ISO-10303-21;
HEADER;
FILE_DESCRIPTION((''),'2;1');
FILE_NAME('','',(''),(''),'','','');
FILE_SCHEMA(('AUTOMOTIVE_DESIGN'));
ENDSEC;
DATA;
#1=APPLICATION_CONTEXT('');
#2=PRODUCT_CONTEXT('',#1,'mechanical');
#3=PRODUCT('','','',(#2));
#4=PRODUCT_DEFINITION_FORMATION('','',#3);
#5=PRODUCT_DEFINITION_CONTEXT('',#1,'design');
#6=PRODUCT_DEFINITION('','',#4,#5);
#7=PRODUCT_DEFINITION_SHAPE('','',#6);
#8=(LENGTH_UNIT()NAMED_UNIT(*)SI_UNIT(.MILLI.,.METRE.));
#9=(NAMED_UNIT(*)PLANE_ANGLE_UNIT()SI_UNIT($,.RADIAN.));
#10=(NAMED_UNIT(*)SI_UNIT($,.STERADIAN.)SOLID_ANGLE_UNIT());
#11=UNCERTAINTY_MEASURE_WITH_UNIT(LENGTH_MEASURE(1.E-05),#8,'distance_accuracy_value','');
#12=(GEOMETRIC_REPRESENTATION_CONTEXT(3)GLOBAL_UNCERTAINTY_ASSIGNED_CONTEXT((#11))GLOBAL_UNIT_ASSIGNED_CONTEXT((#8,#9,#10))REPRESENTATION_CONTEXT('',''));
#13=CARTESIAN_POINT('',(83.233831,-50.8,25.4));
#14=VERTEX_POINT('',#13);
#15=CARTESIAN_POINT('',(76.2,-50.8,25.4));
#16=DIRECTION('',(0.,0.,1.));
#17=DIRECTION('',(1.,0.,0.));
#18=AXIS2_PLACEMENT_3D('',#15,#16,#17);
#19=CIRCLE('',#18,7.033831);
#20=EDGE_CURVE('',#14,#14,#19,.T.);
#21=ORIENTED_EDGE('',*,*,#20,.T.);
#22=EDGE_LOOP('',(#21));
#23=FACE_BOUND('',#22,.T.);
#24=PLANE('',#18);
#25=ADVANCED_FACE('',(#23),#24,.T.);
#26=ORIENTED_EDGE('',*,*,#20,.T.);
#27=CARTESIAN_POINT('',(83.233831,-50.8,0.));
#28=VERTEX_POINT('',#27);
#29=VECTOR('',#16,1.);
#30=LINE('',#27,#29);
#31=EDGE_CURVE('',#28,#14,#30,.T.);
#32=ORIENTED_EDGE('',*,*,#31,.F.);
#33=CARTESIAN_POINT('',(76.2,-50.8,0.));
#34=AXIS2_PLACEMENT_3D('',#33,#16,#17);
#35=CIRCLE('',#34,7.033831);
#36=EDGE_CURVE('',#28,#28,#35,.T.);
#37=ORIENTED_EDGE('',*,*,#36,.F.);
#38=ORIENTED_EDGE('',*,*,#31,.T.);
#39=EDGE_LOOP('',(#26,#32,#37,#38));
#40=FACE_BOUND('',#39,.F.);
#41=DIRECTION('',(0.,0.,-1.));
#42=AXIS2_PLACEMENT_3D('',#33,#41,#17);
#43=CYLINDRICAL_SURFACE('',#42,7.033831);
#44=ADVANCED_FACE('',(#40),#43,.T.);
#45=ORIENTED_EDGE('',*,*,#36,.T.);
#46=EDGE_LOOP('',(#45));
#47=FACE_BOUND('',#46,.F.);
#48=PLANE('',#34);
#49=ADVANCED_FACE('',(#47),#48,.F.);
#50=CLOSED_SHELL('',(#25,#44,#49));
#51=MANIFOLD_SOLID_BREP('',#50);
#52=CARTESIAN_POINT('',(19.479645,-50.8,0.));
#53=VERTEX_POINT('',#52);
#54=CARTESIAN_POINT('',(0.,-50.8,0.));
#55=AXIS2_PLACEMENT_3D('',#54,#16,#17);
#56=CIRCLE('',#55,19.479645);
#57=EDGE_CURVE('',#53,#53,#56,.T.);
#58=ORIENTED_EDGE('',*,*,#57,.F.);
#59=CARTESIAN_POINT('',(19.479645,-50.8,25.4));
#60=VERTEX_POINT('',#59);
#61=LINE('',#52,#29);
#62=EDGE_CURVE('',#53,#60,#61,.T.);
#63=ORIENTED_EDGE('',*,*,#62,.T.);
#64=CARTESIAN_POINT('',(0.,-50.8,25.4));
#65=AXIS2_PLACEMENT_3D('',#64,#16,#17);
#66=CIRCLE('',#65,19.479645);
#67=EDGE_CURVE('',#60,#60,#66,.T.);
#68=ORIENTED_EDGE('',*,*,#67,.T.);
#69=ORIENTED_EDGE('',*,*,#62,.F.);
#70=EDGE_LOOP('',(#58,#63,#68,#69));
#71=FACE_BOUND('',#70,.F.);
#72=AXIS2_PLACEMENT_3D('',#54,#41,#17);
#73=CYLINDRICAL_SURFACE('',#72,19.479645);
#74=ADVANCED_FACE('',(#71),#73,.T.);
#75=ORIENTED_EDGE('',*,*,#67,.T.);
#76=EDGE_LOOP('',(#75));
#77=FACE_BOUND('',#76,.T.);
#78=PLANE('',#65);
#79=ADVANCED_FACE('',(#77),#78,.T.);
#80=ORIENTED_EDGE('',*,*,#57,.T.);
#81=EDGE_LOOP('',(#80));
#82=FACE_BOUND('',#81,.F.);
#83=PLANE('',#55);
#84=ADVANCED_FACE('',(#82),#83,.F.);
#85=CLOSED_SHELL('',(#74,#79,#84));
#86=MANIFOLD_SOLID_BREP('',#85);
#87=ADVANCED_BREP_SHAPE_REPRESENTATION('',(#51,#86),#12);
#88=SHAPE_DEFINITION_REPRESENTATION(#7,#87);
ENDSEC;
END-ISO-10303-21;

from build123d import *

# Parameters (mm, degrees)
F1_R     = 19.4796450826
F2_DEPTH = 25.4
F1_R_2   = 7.0338305057


# Not quite as in the source:
# - a feature names something its author has since deleted; it is built from what else it names


with BuildPart() as f2:
    # F1 (on Top) → F2 (new body)
    with BuildSketch(Plane.XY):
        with Locations((0, -50.8)):
            Circle(F1_R)
    extrude(amount=F2_DEPTH)


with BuildPart() as f2b:
    # F1 (on Top) → F2, piece 2 (new body)
    with BuildSketch(Plane.XY):
        with Locations((76.2, -50.8)):
            Circle(F1_R_2)
    extrude(amount=F2_DEPTH)


solid = Compound([f2.part, f2b.part])
